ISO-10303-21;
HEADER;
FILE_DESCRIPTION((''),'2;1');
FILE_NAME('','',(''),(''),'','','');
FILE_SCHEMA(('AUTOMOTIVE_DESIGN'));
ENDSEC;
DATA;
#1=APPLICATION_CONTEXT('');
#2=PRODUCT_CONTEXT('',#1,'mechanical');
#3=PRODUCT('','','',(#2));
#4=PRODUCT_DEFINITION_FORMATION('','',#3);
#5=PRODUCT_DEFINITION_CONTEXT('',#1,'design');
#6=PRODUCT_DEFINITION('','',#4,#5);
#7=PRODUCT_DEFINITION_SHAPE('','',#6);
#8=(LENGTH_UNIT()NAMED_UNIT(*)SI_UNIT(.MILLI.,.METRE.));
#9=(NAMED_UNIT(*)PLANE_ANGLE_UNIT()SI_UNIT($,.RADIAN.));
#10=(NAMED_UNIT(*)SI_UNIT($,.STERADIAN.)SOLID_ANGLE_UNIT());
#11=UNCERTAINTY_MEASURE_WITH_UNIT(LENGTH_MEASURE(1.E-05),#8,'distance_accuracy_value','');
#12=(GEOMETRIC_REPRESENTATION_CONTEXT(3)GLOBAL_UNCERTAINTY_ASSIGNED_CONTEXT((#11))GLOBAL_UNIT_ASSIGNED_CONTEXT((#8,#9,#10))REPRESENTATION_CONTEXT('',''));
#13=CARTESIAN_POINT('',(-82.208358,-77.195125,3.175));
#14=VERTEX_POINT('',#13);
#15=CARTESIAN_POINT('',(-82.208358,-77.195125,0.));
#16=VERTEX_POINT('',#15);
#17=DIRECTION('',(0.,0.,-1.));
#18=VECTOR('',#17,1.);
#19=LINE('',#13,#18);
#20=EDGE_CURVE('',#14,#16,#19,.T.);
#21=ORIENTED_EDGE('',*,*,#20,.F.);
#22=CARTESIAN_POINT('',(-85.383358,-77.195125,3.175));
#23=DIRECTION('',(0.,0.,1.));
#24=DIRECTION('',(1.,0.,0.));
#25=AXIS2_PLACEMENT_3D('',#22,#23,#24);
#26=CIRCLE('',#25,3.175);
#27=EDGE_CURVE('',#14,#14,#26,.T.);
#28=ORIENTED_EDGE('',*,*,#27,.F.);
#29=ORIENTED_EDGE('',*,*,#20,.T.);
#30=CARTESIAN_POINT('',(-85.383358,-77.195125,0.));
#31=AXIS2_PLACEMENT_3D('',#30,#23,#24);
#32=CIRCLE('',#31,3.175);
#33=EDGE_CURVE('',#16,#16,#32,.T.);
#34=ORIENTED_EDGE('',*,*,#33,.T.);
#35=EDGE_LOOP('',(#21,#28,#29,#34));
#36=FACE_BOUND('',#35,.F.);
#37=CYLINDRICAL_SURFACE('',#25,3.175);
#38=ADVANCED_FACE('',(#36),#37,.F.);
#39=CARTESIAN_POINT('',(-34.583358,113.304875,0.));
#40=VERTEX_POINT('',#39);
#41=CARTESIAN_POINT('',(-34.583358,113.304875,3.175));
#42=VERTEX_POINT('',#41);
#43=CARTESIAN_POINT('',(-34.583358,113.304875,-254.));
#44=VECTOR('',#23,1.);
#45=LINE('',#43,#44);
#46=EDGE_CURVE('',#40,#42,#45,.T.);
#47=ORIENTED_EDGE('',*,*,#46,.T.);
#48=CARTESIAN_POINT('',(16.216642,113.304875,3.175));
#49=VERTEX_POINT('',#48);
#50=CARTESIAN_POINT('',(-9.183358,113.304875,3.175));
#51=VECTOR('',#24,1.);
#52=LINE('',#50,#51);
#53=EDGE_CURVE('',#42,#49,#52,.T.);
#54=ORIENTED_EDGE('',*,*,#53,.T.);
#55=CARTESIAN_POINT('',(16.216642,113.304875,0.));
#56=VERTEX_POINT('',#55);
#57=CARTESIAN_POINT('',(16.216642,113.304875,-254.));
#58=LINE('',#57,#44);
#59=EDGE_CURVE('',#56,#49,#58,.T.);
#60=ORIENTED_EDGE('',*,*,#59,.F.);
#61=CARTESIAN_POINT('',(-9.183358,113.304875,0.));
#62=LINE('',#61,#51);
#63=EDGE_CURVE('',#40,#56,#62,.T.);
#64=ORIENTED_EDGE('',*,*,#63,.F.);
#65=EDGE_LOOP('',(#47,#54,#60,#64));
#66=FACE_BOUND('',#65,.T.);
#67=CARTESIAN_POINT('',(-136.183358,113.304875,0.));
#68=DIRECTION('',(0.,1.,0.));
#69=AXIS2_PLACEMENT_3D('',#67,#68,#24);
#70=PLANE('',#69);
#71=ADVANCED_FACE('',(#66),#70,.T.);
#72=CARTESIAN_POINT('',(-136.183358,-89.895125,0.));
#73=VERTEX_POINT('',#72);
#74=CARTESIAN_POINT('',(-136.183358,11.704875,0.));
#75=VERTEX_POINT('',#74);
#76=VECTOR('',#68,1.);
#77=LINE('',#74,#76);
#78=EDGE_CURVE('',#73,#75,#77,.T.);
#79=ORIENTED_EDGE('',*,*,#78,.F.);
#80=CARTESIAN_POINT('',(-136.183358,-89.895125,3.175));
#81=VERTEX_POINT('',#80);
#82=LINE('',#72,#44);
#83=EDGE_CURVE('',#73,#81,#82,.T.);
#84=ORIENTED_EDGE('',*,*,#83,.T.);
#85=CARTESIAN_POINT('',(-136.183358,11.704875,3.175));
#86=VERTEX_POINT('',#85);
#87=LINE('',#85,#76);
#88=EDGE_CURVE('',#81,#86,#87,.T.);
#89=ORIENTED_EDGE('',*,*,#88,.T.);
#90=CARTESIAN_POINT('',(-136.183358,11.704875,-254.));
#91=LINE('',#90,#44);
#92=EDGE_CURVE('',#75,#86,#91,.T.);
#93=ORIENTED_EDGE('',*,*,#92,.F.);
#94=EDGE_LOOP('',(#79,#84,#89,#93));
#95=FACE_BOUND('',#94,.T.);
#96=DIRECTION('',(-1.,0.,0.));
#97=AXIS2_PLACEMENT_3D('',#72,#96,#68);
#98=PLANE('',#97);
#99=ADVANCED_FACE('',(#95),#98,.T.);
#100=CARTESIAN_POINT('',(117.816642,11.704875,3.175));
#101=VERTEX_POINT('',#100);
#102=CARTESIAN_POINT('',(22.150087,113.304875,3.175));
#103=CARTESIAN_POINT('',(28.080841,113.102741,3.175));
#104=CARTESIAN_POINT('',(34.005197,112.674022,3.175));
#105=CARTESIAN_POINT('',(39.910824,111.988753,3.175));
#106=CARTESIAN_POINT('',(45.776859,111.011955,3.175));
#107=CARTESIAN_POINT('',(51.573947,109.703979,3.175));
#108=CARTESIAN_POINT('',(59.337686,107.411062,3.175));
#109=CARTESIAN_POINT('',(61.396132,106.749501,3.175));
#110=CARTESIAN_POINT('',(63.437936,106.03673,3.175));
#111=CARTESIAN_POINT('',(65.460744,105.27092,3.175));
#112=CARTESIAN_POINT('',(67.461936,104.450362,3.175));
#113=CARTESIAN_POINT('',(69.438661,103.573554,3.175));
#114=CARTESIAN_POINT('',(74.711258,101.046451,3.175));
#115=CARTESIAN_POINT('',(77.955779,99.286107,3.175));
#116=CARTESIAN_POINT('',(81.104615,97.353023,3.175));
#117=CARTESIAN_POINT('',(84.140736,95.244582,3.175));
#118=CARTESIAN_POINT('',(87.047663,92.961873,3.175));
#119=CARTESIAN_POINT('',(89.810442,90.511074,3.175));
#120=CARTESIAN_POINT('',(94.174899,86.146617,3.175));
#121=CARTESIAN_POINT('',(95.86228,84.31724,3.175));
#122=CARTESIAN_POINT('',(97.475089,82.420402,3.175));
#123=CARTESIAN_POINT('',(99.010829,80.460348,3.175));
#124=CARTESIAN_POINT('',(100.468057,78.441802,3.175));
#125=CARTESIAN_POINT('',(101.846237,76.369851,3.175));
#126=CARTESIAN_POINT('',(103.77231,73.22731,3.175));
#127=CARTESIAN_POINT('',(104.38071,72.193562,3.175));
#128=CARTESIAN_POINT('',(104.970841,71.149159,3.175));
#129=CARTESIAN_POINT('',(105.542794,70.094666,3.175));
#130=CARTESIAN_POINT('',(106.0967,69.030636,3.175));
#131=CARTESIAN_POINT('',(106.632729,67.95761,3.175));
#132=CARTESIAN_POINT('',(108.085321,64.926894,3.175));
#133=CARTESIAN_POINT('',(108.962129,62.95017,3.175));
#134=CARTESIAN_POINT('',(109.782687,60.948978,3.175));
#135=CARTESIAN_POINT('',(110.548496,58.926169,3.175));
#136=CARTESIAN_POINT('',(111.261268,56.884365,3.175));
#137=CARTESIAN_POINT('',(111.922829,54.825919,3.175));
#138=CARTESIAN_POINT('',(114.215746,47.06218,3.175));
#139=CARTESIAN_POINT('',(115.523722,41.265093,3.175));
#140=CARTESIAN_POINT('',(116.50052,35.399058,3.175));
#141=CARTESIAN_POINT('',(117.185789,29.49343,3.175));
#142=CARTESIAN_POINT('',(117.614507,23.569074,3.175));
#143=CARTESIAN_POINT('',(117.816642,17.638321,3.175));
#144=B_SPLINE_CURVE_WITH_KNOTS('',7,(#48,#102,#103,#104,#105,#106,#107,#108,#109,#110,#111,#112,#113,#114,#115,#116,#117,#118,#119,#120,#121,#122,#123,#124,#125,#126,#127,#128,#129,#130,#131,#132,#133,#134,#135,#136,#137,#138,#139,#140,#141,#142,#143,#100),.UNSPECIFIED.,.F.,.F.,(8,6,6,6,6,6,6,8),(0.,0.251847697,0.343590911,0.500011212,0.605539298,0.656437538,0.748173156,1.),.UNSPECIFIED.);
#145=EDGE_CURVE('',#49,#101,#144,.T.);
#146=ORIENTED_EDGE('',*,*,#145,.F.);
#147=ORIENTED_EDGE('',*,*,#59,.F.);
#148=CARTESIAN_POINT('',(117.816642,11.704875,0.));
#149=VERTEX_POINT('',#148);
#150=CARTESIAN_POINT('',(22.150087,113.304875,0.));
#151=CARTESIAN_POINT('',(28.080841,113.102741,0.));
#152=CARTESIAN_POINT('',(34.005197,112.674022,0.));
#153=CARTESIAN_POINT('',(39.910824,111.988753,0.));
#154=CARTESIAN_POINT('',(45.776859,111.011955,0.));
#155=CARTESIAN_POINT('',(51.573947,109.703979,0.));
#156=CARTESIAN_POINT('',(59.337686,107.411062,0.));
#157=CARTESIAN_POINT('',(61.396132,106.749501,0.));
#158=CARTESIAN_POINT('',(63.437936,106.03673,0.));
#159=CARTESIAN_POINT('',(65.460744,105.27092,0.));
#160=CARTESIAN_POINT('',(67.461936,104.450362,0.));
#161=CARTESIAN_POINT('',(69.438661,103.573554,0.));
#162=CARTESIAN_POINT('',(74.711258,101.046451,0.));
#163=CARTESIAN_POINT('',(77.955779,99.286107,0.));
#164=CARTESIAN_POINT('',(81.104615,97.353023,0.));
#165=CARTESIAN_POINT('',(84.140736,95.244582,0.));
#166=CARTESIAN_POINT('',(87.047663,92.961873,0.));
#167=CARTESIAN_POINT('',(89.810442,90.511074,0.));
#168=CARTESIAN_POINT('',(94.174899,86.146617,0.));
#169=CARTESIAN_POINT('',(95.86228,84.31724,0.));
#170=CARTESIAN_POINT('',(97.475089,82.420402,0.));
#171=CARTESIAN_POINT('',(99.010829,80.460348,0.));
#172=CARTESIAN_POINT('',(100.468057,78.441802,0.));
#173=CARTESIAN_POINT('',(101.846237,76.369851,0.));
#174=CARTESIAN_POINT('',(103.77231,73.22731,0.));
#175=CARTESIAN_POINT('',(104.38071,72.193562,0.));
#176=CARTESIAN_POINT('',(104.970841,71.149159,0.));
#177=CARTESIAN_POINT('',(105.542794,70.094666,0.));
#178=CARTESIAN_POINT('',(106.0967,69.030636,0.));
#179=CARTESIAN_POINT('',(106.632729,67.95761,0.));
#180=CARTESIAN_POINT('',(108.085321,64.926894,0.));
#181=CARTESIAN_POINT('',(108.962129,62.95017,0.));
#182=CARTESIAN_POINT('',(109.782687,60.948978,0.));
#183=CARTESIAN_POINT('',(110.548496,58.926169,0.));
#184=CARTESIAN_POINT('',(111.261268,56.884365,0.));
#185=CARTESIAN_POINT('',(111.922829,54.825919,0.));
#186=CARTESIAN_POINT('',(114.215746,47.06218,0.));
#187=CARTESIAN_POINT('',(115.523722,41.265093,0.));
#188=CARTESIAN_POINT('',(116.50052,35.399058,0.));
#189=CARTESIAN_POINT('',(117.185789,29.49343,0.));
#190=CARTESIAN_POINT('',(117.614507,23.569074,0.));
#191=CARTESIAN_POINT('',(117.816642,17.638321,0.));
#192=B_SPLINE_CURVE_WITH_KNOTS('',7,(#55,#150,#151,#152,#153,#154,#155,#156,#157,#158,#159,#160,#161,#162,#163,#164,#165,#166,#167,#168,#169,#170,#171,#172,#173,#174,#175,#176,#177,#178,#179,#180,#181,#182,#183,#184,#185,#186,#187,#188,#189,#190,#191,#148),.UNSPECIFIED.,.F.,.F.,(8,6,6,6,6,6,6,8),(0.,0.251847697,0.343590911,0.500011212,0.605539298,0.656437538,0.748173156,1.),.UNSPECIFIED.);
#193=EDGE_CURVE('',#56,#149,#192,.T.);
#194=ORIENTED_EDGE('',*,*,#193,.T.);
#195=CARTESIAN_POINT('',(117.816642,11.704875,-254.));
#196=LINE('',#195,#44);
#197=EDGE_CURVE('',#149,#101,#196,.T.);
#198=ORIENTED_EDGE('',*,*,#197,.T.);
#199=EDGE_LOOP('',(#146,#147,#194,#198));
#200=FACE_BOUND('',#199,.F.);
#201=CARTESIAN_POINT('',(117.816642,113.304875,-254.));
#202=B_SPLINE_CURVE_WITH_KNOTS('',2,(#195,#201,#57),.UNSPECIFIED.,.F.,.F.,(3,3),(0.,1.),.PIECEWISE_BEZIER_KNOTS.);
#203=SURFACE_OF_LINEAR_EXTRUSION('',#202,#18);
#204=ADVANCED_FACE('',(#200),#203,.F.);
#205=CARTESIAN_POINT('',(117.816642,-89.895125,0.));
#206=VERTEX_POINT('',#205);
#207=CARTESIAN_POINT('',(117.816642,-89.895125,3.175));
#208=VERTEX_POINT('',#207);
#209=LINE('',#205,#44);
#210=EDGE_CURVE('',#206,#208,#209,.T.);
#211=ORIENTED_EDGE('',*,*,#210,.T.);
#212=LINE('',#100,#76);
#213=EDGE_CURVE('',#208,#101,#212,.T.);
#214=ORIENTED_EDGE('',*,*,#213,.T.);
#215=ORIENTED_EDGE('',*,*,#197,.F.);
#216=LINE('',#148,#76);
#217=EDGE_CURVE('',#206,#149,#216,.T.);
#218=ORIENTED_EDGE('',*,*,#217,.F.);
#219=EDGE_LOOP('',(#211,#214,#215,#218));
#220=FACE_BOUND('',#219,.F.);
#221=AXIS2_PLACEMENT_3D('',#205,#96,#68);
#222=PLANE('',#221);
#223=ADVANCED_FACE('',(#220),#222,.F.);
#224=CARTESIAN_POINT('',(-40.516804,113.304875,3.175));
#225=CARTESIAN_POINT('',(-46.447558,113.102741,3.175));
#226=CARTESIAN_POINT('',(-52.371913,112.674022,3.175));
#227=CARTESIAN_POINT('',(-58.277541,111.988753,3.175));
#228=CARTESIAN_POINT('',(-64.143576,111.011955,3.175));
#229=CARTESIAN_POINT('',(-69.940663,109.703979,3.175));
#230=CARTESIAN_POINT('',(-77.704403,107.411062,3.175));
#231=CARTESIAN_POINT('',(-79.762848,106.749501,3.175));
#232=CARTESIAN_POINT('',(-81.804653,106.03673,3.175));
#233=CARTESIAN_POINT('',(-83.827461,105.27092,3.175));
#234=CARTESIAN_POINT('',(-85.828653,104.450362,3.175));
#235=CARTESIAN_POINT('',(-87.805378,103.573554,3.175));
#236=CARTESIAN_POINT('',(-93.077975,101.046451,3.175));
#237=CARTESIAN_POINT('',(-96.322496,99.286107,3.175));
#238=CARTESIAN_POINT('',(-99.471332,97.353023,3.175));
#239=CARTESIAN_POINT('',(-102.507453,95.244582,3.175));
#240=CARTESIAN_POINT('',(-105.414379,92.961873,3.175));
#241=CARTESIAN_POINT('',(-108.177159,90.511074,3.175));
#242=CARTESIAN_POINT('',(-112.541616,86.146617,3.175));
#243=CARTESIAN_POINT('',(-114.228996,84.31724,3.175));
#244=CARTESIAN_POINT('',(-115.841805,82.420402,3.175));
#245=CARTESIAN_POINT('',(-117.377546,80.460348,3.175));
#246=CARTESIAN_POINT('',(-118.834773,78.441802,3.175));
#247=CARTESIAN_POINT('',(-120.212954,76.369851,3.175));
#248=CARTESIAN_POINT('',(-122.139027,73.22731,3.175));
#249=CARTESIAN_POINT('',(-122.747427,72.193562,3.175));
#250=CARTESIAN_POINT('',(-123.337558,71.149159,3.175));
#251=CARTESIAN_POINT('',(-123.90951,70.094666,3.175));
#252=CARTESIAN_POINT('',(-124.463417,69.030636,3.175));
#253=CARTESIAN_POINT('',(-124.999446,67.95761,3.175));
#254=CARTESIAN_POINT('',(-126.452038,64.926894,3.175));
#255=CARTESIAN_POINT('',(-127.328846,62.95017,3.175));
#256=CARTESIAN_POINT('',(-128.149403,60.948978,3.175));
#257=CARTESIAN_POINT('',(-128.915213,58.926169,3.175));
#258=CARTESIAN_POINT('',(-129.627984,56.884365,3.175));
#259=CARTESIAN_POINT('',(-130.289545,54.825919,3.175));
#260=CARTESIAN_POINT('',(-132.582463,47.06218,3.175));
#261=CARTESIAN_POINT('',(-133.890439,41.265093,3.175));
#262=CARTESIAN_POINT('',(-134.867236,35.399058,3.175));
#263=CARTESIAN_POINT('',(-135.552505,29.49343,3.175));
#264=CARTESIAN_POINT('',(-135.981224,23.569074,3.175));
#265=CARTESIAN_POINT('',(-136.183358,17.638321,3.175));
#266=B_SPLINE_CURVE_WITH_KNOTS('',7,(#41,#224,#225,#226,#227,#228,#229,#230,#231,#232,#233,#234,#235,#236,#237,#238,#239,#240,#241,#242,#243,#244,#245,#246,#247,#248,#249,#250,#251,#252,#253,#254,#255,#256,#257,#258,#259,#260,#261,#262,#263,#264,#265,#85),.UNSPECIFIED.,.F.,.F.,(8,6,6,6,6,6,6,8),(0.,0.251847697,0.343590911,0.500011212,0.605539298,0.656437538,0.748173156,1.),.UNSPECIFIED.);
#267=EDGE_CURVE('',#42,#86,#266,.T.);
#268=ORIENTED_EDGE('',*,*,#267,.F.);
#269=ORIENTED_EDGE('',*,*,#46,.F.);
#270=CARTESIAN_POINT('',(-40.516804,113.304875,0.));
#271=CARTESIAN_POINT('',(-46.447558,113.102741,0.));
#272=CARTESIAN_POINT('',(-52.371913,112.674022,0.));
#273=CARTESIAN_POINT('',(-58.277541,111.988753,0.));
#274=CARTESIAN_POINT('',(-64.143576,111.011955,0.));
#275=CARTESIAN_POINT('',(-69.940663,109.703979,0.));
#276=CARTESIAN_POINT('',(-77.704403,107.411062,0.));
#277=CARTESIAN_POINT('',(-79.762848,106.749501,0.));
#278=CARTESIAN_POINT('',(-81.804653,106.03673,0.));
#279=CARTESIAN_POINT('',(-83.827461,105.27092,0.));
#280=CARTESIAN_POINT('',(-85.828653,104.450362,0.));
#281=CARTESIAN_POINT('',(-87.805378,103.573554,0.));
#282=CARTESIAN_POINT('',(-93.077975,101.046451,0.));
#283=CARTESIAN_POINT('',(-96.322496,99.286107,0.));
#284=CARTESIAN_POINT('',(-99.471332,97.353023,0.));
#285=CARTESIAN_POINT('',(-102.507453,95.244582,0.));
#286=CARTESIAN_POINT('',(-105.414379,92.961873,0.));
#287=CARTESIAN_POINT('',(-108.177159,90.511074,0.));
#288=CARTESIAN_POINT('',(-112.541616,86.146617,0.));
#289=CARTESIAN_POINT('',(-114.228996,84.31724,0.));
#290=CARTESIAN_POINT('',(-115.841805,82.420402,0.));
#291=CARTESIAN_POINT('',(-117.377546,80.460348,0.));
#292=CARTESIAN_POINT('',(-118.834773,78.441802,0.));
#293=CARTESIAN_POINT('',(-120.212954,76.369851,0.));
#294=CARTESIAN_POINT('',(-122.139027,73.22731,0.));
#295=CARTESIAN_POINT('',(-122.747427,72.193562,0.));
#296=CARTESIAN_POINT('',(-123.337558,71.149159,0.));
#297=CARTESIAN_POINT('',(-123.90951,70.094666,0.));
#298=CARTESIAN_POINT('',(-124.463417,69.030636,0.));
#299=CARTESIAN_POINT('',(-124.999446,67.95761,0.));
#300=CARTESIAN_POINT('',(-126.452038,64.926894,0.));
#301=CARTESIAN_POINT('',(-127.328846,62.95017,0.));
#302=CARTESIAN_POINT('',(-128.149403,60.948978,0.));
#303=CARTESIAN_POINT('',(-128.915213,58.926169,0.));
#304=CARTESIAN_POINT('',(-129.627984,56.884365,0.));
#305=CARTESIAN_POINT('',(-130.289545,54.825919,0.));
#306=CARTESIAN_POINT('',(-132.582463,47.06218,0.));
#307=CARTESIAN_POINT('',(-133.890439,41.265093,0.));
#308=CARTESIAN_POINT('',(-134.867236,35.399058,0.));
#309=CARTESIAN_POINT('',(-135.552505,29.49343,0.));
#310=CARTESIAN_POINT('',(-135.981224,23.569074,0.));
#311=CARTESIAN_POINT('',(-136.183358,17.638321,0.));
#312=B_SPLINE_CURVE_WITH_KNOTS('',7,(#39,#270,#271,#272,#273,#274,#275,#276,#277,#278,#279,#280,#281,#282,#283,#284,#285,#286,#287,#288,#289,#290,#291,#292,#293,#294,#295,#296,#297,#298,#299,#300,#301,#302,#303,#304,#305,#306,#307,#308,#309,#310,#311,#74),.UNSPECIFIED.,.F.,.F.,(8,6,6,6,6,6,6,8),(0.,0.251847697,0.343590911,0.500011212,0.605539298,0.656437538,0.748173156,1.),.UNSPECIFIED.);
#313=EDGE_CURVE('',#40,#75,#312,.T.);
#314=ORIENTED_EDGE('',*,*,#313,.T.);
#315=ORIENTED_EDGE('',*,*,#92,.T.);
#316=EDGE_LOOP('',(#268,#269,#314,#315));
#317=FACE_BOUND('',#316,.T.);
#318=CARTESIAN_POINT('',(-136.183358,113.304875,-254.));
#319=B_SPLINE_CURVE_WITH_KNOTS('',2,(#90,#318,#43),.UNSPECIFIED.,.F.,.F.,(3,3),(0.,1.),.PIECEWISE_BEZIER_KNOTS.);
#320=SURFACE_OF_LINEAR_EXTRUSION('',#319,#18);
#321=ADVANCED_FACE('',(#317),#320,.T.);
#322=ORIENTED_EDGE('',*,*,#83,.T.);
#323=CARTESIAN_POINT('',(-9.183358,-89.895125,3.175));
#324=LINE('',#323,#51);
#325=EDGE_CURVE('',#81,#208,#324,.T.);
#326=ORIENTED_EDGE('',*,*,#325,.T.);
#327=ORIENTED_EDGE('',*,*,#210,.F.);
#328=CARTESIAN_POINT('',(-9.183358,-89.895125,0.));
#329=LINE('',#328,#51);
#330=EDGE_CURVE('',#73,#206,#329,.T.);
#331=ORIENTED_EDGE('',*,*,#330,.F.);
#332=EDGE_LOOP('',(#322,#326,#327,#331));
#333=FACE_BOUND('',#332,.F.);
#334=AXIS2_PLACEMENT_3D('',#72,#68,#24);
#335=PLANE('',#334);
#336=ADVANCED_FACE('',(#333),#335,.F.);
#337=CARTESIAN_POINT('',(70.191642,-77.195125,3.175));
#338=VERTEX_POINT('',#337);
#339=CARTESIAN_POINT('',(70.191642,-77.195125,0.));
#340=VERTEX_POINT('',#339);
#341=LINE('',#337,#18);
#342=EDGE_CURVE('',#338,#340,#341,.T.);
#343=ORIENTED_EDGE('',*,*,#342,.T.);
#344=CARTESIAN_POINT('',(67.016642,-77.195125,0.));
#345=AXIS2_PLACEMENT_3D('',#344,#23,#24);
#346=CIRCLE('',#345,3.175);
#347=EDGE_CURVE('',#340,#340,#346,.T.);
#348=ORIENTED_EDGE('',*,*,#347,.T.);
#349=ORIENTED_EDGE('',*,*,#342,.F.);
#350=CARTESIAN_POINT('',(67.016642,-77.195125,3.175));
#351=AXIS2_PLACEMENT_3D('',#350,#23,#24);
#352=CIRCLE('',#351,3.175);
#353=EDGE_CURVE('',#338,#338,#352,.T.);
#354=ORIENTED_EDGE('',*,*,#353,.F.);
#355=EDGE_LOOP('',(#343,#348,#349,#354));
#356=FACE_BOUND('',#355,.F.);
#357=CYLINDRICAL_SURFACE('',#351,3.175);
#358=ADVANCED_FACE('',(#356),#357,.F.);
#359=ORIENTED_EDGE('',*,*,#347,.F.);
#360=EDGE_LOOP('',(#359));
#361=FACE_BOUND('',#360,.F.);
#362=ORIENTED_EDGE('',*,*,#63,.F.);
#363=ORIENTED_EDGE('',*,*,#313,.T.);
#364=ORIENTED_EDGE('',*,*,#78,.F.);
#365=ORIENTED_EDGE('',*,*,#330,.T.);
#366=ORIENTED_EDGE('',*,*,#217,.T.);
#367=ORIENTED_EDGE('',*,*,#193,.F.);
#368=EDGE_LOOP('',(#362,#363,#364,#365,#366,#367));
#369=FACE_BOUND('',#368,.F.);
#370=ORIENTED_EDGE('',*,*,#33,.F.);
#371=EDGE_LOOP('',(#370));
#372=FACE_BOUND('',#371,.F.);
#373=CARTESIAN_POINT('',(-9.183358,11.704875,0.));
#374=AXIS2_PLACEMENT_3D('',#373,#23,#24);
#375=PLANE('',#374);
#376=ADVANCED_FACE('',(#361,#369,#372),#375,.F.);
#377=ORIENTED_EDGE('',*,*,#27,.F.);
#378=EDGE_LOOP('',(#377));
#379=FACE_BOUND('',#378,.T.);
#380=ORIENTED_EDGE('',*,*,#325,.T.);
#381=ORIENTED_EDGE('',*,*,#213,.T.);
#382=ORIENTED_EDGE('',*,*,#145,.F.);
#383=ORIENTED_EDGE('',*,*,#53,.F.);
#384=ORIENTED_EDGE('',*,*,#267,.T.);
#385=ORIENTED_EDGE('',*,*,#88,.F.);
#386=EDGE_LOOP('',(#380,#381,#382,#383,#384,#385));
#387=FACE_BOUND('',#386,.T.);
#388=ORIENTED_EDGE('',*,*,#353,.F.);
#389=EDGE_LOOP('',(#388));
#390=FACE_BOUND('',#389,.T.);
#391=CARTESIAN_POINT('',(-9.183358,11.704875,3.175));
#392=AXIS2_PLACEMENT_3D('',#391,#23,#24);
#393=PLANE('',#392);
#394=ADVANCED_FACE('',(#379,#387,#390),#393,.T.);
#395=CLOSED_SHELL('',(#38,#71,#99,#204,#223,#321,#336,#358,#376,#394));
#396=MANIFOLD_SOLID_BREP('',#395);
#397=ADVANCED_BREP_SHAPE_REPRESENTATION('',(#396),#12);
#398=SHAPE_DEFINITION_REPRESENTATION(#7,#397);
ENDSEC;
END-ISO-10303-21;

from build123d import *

# Parameters (mm, degrees)
F0_W        = 254
F0_H        = 203.2
F1_DEPTH    = 3.175
F2_T1_DEPTH = 511.175
F3_R        = 3.175
F4_DEPTH    = 3.175


# Not quite as in the source:
# - a fillet or chamfer that OpenCascade refuses, or shapes differently, is made with other operations: its cross-section is extruded or revolved along the edge and cut away or added


with BuildPart() as f1:
    # F0 (on Top) → F1 (new body)
    with BuildSketch(Plane.XY):
        with Locations((-9.1833584011, 11.7048747692)):
            Rectangle(F0_W, F0_H)
    extrude(amount=F1_DEPTH)

    # F2: fillet of radius 101.6 on 2 edges, made by hand

    # F2_s2 → F2_t1 (cut)
    with BuildSketch(Plane.XY.offset(-254)):
        with BuildLine():
            add(Edge.make_bspline(
                [(-136.1833584011, 11.7048747692), (-136.1833584011, 113.3048747692), (-34.5833584011, 113.3048747692)],
                knots=[0, 0, 0, 1, 1, 1], degree=2, weights=[1, 1, 1]))
            Line((-34.5833584011, 113.3048747692), (-136.1833584011, 113.3048747692))
            Line((-136.1833584011, 113.3048747692), (-136.1833584011, 11.7048747692))
        make_face()
        with BuildLine():
            add(Edge.make_bspline(
                [(117.8166415989, 11.7048747692), (117.8166415989, 113.3048747692), (16.2166415989, 113.3048747692)],
                knots=[0, 0, 0, 1, 1, 1], degree=2, weights=[1, 1, 1]))
            Line((16.2166415989, 113.3048747692), (117.8166415989, 113.3048747692))
            Line((117.8166415989, 113.3048747692), (117.8166415989, 11.7048747692))
        make_face()
    extrude(amount=F2_T1_DEPTH, mode=Mode.SUBTRACT)

    # F3 (on face) → F4 (cut)
    with BuildSketch(Plane.XY.offset(3.175)):
        with Locations((-85.3833584011, -77.1951252308)):
            Circle(F3_R)
        with Locations((67.0166415989, -77.1951252308)):
            Circle(F3_R)
    extrude(amount=-F4_DEPTH, mode=Mode.SUBTRACT)


solid = f1.part
